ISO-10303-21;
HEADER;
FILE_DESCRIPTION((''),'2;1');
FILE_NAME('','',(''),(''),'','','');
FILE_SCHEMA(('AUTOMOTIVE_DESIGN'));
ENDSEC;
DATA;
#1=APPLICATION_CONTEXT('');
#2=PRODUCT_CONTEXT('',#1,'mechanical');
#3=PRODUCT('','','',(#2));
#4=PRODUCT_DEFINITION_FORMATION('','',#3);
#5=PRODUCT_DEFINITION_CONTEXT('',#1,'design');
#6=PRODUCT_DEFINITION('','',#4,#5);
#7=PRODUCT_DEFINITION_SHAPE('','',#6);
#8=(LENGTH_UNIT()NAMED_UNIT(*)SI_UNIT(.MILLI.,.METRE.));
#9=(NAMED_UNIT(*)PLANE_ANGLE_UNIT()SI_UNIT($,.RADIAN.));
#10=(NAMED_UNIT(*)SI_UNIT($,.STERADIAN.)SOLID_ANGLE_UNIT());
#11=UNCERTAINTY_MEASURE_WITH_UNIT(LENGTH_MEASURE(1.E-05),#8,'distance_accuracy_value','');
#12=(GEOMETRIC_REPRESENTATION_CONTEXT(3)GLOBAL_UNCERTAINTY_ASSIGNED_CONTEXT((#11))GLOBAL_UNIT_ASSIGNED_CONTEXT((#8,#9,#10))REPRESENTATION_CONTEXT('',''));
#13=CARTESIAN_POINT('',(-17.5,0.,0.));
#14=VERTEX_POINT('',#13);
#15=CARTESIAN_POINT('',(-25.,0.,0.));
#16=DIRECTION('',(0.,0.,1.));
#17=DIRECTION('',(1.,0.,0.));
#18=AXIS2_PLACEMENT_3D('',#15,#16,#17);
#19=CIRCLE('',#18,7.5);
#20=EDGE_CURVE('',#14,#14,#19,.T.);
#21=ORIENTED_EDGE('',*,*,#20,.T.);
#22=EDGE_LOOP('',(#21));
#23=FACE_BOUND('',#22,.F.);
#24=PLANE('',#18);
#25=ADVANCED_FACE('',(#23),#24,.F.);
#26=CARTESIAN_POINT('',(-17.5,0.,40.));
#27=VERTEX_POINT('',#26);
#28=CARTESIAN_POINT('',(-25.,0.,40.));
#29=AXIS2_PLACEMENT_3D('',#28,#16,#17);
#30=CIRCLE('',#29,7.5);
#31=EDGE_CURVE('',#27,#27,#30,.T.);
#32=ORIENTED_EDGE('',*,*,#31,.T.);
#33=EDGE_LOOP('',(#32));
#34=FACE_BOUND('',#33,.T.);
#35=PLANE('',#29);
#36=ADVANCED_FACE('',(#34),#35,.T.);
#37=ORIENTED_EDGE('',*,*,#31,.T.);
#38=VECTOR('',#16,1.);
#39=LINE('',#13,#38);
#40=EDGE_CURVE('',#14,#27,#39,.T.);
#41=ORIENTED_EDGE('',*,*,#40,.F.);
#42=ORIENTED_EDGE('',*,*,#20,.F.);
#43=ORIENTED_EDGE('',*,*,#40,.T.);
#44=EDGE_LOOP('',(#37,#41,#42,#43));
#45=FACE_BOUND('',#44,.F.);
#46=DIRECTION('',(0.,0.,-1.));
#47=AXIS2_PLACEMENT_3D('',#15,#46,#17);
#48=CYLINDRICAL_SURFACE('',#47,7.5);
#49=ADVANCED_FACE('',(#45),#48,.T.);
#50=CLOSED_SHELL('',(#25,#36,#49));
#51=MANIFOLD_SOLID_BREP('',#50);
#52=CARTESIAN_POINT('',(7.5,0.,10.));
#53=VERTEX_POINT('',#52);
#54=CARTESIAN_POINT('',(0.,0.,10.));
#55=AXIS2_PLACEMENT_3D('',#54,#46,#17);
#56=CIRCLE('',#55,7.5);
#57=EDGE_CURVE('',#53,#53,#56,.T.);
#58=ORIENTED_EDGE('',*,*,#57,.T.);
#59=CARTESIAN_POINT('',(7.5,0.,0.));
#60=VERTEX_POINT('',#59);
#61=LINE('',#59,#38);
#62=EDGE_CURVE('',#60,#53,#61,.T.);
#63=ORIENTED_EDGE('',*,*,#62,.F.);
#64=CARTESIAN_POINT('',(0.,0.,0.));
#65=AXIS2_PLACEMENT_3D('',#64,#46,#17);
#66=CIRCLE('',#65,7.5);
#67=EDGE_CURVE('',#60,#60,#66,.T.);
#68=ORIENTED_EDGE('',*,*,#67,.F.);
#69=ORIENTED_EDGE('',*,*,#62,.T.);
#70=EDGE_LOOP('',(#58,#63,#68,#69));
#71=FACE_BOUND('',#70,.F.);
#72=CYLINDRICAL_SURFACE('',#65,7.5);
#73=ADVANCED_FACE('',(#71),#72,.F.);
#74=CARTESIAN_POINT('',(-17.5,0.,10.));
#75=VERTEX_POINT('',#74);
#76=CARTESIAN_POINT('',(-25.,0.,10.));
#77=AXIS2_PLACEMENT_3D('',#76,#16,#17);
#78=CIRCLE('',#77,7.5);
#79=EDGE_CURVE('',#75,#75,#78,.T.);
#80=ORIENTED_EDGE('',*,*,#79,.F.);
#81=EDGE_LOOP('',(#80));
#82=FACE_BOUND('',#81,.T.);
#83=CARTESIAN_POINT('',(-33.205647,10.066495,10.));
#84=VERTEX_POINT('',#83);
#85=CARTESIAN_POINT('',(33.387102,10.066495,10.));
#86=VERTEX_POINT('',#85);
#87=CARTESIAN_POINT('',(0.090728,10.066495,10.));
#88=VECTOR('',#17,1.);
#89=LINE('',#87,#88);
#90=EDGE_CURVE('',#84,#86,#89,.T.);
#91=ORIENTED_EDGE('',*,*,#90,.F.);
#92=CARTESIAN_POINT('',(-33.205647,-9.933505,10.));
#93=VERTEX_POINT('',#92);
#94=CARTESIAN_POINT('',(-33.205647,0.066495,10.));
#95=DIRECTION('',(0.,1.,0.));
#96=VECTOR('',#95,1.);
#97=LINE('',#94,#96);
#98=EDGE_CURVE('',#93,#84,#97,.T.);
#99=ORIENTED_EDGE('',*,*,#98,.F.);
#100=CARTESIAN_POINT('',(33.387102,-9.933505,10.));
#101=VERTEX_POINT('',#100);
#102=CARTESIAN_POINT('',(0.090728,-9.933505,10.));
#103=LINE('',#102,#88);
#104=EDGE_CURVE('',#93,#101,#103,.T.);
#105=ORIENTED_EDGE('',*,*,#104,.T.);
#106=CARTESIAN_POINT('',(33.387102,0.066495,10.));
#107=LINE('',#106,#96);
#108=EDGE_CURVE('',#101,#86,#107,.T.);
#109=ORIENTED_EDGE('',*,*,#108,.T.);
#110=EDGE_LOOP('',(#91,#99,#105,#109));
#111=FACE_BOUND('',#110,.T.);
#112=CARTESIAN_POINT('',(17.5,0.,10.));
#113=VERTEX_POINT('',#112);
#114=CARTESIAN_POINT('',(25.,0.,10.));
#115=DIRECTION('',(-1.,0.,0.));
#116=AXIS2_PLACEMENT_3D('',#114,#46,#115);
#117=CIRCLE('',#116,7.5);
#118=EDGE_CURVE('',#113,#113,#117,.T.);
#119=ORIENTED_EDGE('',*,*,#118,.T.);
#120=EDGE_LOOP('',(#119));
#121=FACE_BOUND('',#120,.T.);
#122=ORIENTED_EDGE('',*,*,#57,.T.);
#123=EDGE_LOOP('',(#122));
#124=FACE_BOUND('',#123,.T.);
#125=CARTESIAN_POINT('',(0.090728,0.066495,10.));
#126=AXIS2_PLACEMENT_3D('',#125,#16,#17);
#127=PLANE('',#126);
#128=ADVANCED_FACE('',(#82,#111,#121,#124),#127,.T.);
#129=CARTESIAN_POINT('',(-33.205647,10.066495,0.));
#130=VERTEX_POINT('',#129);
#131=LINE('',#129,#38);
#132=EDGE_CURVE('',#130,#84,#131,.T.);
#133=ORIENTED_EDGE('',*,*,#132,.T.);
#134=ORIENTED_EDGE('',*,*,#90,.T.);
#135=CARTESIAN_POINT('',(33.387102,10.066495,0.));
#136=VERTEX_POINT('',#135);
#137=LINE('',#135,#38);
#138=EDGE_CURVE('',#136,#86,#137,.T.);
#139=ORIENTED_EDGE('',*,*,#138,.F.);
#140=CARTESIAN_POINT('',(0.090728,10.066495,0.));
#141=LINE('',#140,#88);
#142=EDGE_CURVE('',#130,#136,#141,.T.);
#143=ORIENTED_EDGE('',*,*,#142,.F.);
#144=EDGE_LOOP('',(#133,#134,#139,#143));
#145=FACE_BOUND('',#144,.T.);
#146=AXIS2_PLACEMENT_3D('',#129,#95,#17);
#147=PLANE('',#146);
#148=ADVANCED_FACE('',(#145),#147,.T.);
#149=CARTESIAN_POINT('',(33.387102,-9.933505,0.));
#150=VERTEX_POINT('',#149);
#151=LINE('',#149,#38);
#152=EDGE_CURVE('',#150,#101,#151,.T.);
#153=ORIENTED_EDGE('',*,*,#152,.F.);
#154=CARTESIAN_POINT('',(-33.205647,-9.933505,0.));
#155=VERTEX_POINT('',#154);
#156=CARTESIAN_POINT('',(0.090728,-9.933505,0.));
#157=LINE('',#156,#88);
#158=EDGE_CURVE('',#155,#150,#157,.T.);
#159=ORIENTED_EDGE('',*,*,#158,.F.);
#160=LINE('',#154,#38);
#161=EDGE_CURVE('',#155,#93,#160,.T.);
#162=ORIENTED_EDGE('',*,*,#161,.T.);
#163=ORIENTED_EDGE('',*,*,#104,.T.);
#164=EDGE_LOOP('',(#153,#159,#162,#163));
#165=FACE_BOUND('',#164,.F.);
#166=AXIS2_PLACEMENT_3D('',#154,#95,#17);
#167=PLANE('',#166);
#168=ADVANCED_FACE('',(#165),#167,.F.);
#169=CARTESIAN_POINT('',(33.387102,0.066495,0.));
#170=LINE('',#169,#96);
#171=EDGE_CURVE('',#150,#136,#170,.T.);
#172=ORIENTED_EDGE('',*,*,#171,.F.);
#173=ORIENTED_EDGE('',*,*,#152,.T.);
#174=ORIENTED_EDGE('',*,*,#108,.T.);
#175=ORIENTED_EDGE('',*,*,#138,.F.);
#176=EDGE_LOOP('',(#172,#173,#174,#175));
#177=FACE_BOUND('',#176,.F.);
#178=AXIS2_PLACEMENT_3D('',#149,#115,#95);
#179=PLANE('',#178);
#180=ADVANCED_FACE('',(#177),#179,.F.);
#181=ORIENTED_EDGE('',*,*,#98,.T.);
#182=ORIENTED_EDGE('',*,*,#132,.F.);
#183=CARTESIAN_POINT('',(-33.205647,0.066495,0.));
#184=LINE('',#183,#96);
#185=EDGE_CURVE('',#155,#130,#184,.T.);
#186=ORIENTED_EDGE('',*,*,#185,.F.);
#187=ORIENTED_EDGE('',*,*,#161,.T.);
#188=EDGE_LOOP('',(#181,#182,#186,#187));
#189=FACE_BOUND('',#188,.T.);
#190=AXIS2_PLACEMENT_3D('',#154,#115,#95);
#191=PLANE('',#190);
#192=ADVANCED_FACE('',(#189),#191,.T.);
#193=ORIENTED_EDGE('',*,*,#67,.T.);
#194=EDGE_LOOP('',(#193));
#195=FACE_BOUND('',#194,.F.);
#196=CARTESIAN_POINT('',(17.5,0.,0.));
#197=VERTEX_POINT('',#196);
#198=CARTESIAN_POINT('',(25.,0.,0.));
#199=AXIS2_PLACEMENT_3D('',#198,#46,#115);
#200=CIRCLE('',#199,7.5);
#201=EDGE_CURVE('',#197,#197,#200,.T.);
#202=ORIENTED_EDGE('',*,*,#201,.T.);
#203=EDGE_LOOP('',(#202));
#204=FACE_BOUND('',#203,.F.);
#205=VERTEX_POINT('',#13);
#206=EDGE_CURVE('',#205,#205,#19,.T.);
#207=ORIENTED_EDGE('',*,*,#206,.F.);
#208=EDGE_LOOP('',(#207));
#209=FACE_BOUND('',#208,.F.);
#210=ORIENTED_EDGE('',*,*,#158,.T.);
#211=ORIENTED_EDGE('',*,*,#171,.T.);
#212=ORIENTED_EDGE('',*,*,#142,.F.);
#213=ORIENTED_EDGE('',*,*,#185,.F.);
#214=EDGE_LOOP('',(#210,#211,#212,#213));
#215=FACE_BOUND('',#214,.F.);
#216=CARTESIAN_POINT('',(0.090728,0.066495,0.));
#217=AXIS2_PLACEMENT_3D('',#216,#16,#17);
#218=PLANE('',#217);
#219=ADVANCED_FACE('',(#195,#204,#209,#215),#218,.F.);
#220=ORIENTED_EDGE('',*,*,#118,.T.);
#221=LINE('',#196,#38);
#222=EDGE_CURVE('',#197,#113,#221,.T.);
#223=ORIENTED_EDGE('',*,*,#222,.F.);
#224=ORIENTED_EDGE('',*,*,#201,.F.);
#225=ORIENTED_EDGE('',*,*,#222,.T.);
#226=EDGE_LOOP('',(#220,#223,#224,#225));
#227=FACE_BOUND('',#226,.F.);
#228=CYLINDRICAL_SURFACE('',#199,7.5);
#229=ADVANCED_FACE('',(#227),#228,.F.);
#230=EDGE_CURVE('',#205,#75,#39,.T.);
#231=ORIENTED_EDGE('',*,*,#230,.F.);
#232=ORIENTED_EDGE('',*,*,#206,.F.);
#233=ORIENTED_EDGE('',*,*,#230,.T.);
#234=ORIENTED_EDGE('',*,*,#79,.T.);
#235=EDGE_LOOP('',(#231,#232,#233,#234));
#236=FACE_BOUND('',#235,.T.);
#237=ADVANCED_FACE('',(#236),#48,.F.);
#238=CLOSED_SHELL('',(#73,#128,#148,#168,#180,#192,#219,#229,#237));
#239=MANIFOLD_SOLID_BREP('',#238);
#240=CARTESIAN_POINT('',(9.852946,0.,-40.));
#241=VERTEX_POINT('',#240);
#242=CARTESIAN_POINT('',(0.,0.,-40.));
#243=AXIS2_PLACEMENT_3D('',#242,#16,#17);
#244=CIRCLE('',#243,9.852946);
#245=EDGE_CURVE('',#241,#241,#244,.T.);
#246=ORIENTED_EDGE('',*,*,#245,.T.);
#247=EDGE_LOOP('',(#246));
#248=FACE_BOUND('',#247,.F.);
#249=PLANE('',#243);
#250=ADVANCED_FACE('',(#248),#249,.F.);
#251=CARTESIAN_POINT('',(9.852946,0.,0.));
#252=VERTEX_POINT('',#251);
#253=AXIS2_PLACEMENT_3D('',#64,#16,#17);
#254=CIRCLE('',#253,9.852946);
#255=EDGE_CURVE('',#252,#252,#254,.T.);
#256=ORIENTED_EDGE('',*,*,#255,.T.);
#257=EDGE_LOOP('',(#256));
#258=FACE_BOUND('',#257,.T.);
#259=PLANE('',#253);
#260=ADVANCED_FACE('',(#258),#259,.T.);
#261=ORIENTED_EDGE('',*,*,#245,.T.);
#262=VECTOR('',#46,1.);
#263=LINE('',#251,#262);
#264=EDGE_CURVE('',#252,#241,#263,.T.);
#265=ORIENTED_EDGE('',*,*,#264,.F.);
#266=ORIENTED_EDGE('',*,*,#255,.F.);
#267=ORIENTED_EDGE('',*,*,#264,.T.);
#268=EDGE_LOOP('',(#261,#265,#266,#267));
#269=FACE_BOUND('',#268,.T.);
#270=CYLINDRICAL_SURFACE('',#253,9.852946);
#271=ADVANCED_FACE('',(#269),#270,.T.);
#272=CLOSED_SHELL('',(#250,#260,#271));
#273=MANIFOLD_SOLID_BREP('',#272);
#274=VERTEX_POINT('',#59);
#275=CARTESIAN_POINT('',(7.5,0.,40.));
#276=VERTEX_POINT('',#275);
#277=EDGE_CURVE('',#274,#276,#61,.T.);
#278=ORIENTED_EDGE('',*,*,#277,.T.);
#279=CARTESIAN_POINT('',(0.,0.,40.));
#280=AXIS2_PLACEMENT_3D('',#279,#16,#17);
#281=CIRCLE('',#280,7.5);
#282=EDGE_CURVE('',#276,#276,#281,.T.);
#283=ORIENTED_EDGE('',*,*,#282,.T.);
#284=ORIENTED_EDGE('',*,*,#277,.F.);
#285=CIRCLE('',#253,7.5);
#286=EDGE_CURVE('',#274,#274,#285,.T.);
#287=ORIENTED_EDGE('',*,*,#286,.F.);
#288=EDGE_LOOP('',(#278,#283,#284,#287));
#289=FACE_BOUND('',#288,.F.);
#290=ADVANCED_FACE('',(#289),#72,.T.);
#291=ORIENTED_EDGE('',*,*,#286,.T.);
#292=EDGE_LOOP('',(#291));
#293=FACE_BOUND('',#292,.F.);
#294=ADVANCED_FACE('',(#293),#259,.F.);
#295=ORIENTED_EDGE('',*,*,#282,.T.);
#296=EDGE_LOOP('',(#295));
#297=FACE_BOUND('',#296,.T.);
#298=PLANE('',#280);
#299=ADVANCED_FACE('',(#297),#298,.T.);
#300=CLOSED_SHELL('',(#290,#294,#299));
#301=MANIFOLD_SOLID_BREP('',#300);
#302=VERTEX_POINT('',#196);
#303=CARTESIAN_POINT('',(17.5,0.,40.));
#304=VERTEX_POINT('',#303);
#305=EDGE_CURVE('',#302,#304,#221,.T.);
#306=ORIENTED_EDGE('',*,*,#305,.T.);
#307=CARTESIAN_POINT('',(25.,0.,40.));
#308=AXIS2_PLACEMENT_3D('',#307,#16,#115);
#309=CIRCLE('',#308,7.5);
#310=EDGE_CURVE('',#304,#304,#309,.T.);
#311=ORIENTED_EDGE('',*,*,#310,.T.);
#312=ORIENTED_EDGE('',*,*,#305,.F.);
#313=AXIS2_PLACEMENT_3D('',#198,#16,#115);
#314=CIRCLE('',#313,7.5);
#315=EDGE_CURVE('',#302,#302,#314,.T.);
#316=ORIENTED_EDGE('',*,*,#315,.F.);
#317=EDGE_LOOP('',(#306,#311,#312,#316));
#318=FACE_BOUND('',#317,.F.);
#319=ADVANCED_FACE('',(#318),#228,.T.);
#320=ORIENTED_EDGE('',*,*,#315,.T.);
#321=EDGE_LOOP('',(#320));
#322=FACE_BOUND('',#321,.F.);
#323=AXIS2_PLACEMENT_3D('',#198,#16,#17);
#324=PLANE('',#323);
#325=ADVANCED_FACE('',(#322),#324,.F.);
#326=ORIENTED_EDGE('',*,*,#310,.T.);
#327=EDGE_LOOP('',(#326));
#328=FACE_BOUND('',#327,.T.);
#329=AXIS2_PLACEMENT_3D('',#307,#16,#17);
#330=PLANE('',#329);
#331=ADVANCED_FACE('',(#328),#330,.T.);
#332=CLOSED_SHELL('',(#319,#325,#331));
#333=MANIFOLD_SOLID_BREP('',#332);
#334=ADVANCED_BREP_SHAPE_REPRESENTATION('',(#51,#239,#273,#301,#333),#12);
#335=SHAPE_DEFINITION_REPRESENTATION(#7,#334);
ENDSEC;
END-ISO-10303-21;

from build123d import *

# Parameters (mm, degrees)
F1_DEPTH = 40
F0_R     = 7.5
F0_W     = 66.5927492082
F0_H     = 20
F2_DEPTH = 10
F3_R     = 9.8529460541
F4_DEPTH = 40


with BuildPart() as f1:
    # F0 (on Top) → F1 (new body)
    with BuildSketch(Plane.XY):
        with BuildLine():
            ThreePointArc((-7.5, 0), (0, -7.5), (7.5, 0))
            ThreePointArc((7.5, 0), (0, 7.5), (-7.5, 0))
        make_face()
    extrude(amount=F1_DEPTH)


with BuildPart() as f1b:
    # F0 (on Top) → F1, piece 2 (new body)
    with BuildSketch(Plane.XY):
        with Locations((-25, 0)):
            Circle(F0_R)
    extrude(amount=F1_DEPTH)


with BuildPart() as f1c:
    # F0 (on Top) → F1, piece 3 (new body)
    with BuildSketch(Plane.XY):
        with BuildLine():
            ThreePointArc((32.5, 0), (25, 7.5), (17.5, 0))
            ThreePointArc((17.5, 0), (25, -7.5), (32.5, 0))
        make_face()
    extrude(amount=F1_DEPTH)


with BuildPart() as f2:
    # F0 (on Top) → F2 (new body)
    with BuildSketch(Plane.XY):
        with Locations((0.0907275826, 0.0664947927)):
            Rectangle(F0_W, F0_H)
        with Locations((-25, 0)):
            Circle(F0_R, mode=Mode.SUBTRACT)
        with BuildLine():
            ThreePointArc((-7.5, 0), (0, 7.5), (7.5, 0))
            ThreePointArc((7.5, 0), (0, -7.5), (-7.5, 0))
        make_face(mode=Mode.SUBTRACT)
        with BuildLine():
            ThreePointArc((32.5, 0), (25, -7.5), (17.5, 0))
            ThreePointArc((17.5, 0), (25, 7.5), (32.5, 0))
        make_face(mode=Mode.SUBTRACT)
    extrude(amount=F2_DEPTH)


with BuildPart() as f4:
    # F3 (on Top) → F4 (new body)
    with BuildSketch(Plane.XY):
        Circle(F3_R)
    extrude(amount=-F4_DEPTH)


solid = Compound([f1.part, f1b.part, f1c.part, f2.part, f4.part])
